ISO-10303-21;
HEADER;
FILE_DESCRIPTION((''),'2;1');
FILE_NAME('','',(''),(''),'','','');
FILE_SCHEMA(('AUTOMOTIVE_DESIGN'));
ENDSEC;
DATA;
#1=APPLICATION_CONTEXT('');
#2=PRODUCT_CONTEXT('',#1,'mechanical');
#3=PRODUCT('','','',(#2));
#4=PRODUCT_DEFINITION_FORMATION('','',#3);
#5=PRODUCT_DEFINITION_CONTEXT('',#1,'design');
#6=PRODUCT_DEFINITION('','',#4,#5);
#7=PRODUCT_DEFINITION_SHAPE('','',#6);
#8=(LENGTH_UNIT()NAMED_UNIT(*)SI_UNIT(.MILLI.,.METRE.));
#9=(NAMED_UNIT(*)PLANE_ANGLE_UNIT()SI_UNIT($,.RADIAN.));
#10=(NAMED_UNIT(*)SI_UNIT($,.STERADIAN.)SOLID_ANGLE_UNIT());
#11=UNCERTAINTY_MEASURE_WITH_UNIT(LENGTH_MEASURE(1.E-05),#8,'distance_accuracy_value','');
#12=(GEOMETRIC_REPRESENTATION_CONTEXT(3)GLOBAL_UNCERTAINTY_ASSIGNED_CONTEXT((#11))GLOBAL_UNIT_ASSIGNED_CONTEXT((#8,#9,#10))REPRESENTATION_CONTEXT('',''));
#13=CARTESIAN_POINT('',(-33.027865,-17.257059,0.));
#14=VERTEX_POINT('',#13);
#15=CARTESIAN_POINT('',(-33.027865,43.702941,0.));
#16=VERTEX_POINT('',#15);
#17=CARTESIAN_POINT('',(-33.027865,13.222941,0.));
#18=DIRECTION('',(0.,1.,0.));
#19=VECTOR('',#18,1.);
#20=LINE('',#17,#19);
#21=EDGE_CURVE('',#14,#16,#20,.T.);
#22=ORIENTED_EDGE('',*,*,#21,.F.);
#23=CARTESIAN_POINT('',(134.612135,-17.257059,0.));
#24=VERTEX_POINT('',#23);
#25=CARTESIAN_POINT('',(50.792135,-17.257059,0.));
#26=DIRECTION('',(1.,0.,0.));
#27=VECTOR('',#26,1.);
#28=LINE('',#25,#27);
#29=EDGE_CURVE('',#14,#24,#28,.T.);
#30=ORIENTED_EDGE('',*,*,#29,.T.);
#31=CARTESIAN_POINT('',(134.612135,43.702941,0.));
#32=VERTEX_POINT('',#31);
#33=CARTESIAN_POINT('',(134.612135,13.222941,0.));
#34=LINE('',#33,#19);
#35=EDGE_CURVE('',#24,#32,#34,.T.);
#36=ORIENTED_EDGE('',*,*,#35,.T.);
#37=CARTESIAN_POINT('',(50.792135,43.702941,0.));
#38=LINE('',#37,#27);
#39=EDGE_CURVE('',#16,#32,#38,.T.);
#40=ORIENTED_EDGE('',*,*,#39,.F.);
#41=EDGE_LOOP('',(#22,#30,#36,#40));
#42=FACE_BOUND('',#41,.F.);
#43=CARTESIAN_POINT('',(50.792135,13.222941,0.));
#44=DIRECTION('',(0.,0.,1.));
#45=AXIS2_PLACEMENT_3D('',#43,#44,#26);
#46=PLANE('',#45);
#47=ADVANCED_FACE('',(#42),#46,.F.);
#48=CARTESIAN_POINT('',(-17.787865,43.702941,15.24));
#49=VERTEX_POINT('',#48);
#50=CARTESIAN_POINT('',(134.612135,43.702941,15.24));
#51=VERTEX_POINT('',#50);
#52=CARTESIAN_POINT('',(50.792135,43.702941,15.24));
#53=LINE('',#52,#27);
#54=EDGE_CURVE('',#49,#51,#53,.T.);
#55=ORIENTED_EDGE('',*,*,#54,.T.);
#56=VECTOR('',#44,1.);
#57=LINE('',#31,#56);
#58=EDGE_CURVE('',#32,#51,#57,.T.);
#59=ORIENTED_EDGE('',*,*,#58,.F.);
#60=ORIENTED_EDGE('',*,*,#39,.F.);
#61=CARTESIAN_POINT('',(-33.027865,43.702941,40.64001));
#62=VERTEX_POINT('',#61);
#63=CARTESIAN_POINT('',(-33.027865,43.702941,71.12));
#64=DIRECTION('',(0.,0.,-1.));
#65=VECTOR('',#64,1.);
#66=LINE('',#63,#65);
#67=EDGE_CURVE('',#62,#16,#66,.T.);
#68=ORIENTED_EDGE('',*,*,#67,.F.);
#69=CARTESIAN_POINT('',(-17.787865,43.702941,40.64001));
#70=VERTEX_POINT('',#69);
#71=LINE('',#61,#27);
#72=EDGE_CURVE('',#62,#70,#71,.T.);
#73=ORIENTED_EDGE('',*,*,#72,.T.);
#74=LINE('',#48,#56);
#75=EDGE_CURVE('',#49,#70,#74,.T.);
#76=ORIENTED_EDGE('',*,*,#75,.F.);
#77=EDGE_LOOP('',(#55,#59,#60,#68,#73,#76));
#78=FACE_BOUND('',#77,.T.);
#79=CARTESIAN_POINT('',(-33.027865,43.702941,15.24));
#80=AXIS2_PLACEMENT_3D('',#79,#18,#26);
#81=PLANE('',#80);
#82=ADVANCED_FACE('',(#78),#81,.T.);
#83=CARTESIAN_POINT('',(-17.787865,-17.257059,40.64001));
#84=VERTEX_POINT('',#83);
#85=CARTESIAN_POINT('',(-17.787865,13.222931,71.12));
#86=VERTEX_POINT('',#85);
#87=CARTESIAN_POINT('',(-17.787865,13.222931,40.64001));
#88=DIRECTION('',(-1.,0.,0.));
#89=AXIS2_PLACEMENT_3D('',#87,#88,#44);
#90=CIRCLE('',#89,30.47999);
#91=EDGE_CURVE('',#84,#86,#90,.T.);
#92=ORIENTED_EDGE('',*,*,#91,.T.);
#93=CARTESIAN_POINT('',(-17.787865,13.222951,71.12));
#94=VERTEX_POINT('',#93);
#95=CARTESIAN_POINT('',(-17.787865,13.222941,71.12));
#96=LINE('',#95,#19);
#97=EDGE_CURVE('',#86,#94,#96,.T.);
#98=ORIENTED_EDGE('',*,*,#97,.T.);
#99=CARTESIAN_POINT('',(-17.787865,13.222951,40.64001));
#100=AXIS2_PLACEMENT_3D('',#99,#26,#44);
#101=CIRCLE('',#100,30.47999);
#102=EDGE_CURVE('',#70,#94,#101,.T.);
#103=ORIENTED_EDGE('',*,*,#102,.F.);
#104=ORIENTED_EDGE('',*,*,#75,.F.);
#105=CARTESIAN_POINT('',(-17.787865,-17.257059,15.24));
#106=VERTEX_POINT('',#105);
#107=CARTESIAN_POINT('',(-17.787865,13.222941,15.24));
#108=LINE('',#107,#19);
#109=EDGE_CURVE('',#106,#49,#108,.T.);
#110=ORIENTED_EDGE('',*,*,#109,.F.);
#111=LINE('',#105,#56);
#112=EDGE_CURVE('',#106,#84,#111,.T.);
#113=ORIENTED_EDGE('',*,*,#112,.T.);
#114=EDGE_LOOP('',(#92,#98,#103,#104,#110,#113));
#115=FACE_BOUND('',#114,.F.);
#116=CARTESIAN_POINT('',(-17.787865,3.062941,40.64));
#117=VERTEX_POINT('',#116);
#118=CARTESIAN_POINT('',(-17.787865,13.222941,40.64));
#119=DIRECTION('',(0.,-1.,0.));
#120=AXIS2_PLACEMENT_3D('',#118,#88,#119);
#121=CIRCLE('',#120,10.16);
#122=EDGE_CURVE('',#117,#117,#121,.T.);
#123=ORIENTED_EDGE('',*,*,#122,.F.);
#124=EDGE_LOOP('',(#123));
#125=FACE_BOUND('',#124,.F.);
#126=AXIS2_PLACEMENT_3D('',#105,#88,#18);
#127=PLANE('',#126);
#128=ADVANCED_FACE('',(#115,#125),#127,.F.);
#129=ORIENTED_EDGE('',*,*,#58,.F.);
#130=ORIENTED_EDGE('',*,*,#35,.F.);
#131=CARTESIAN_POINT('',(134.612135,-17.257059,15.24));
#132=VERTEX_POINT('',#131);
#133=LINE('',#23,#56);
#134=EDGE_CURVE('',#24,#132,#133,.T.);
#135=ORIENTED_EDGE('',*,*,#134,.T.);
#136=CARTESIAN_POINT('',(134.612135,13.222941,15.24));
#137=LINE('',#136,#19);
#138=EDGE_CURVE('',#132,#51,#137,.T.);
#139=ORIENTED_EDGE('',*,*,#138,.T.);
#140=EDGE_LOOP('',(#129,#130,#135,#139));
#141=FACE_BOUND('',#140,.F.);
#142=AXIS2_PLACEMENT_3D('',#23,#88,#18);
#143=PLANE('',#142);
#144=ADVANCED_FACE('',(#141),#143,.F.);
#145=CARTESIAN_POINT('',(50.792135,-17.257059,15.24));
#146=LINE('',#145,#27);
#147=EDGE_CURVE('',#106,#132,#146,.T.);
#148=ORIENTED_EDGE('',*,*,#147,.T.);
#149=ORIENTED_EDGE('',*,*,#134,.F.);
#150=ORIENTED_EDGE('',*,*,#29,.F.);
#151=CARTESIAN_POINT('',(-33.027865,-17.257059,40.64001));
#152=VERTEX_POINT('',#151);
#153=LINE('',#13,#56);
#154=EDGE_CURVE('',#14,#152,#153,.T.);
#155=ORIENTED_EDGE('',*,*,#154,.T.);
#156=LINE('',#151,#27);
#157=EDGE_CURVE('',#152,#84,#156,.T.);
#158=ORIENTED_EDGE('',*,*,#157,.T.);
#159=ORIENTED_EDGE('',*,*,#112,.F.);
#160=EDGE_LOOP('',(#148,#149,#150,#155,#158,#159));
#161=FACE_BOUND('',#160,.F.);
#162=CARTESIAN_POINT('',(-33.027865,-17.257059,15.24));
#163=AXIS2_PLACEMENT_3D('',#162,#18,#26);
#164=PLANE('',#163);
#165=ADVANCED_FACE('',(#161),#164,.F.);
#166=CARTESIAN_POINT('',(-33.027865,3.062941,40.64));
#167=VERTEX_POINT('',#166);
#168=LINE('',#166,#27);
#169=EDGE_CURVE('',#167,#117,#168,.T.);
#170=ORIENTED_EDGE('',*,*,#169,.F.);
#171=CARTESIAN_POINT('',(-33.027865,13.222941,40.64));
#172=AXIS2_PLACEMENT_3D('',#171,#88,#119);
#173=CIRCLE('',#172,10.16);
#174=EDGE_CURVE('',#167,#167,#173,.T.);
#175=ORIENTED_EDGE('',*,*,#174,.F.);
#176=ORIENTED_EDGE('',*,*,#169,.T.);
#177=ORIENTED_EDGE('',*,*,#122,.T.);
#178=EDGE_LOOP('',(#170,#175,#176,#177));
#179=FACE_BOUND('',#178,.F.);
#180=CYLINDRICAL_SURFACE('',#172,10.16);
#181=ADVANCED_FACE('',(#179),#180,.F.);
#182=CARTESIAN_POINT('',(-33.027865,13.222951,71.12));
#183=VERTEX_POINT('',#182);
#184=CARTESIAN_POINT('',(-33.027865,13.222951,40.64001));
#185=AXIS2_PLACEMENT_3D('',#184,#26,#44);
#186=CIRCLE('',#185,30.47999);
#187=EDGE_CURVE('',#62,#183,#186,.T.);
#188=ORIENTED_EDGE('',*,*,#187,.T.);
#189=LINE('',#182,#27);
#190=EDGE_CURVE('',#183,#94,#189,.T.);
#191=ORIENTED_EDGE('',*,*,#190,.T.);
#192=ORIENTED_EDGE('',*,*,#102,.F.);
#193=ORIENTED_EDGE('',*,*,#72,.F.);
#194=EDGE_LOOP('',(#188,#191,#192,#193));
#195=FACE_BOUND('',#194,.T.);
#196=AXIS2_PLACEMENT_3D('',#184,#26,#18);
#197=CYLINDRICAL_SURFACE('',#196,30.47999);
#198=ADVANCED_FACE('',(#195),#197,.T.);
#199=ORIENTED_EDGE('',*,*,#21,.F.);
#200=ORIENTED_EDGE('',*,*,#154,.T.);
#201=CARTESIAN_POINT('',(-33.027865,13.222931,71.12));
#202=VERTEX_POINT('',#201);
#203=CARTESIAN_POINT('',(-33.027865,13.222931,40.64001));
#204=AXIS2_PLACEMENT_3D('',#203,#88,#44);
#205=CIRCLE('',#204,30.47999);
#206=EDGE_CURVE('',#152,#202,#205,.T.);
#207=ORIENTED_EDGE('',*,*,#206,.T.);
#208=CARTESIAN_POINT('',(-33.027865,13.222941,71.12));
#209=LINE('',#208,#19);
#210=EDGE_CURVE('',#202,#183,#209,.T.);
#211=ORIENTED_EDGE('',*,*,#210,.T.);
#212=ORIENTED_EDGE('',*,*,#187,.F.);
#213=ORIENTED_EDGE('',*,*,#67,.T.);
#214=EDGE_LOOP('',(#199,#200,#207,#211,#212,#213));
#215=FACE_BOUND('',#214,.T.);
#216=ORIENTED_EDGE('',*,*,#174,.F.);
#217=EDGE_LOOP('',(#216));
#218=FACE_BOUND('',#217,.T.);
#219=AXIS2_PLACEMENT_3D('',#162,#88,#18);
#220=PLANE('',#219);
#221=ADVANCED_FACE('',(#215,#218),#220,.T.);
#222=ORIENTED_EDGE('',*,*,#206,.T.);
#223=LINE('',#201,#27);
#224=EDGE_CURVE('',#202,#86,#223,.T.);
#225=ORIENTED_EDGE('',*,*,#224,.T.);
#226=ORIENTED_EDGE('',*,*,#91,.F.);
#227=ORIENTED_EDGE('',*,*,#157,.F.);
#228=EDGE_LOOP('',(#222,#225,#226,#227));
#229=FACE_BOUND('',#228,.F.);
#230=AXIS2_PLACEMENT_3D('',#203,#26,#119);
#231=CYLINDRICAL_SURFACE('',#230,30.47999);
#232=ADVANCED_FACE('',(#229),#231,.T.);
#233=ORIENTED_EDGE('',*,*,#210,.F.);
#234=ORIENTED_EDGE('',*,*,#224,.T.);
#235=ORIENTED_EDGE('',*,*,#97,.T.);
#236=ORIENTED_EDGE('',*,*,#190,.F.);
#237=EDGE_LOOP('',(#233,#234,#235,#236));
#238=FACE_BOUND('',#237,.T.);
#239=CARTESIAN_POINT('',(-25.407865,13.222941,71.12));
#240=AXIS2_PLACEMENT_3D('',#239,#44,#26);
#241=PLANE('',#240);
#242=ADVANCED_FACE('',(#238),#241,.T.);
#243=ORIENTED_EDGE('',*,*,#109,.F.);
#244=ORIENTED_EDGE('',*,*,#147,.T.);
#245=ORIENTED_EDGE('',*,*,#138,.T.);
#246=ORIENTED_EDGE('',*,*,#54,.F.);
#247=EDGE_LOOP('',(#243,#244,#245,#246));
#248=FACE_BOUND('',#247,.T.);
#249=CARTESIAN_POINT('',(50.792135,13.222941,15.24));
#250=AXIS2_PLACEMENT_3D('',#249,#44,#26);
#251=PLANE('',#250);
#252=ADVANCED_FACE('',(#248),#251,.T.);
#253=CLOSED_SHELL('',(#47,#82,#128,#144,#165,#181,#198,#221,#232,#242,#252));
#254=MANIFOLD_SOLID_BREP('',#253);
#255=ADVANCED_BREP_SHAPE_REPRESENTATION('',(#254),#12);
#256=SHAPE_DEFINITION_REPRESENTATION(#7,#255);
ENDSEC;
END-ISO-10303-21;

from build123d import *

# Parameters (mm, degrees)
F0_W     = 167.64
F0_H     = 60.96
F1_DEPTH = 15.24
F2_W     = 15.24
F2_H     = 60.96
F3_DEPTH = 55.88
F4_R     = 30.47999
F5_R     = 10.16
F6_DEPTH = 15.24


# Not quite as in the source:
# - a fillet or chamfer is up to 0.001 mm smaller than in the source, because OpenCascade refuses the exact size


with BuildPart() as f1:
    # F0 (on Top) → F1 (new body)
    with BuildSketch(Plane.XY):
        with Locations((50.7921350074, 13.222941007)):
            Rectangle(F0_W, F0_H)
    extrude(amount=F1_DEPTH)

    # F2 (on face) → F3 (join)
    with BuildSketch(Plane.XY.offset(15.24)):
        with Locations((-25.4078649926, 13.222941007)):
            Rectangle(F2_W, F2_H)
    extrude(amount=F3_DEPTH)

    # F4 (radius 30.48 in the source; OpenCascade refuses exactly that, so slightly less here)
    f4_edges = [f1.edges().sort_by_distance(p)[0] for p in [
        (-25.407865, -17.257059, 71.12),
        (-25.407865, 43.702941, 71.12),
    ]]
    fillet(f4_edges, radius=F4_R)

    # F5 (on face) → F6 (cut)
    with BuildSketch(Plane(origin=(-33.0278649926, 0, 0), x_dir=(0, -1, 0), z_dir=(-1, 0, 0))):
        with Locations((-13.222941007, 40.64)):
            Circle(F5_R)
    extrude(amount=-F6_DEPTH, mode=Mode.SUBTRACT)


solid = f1.part
